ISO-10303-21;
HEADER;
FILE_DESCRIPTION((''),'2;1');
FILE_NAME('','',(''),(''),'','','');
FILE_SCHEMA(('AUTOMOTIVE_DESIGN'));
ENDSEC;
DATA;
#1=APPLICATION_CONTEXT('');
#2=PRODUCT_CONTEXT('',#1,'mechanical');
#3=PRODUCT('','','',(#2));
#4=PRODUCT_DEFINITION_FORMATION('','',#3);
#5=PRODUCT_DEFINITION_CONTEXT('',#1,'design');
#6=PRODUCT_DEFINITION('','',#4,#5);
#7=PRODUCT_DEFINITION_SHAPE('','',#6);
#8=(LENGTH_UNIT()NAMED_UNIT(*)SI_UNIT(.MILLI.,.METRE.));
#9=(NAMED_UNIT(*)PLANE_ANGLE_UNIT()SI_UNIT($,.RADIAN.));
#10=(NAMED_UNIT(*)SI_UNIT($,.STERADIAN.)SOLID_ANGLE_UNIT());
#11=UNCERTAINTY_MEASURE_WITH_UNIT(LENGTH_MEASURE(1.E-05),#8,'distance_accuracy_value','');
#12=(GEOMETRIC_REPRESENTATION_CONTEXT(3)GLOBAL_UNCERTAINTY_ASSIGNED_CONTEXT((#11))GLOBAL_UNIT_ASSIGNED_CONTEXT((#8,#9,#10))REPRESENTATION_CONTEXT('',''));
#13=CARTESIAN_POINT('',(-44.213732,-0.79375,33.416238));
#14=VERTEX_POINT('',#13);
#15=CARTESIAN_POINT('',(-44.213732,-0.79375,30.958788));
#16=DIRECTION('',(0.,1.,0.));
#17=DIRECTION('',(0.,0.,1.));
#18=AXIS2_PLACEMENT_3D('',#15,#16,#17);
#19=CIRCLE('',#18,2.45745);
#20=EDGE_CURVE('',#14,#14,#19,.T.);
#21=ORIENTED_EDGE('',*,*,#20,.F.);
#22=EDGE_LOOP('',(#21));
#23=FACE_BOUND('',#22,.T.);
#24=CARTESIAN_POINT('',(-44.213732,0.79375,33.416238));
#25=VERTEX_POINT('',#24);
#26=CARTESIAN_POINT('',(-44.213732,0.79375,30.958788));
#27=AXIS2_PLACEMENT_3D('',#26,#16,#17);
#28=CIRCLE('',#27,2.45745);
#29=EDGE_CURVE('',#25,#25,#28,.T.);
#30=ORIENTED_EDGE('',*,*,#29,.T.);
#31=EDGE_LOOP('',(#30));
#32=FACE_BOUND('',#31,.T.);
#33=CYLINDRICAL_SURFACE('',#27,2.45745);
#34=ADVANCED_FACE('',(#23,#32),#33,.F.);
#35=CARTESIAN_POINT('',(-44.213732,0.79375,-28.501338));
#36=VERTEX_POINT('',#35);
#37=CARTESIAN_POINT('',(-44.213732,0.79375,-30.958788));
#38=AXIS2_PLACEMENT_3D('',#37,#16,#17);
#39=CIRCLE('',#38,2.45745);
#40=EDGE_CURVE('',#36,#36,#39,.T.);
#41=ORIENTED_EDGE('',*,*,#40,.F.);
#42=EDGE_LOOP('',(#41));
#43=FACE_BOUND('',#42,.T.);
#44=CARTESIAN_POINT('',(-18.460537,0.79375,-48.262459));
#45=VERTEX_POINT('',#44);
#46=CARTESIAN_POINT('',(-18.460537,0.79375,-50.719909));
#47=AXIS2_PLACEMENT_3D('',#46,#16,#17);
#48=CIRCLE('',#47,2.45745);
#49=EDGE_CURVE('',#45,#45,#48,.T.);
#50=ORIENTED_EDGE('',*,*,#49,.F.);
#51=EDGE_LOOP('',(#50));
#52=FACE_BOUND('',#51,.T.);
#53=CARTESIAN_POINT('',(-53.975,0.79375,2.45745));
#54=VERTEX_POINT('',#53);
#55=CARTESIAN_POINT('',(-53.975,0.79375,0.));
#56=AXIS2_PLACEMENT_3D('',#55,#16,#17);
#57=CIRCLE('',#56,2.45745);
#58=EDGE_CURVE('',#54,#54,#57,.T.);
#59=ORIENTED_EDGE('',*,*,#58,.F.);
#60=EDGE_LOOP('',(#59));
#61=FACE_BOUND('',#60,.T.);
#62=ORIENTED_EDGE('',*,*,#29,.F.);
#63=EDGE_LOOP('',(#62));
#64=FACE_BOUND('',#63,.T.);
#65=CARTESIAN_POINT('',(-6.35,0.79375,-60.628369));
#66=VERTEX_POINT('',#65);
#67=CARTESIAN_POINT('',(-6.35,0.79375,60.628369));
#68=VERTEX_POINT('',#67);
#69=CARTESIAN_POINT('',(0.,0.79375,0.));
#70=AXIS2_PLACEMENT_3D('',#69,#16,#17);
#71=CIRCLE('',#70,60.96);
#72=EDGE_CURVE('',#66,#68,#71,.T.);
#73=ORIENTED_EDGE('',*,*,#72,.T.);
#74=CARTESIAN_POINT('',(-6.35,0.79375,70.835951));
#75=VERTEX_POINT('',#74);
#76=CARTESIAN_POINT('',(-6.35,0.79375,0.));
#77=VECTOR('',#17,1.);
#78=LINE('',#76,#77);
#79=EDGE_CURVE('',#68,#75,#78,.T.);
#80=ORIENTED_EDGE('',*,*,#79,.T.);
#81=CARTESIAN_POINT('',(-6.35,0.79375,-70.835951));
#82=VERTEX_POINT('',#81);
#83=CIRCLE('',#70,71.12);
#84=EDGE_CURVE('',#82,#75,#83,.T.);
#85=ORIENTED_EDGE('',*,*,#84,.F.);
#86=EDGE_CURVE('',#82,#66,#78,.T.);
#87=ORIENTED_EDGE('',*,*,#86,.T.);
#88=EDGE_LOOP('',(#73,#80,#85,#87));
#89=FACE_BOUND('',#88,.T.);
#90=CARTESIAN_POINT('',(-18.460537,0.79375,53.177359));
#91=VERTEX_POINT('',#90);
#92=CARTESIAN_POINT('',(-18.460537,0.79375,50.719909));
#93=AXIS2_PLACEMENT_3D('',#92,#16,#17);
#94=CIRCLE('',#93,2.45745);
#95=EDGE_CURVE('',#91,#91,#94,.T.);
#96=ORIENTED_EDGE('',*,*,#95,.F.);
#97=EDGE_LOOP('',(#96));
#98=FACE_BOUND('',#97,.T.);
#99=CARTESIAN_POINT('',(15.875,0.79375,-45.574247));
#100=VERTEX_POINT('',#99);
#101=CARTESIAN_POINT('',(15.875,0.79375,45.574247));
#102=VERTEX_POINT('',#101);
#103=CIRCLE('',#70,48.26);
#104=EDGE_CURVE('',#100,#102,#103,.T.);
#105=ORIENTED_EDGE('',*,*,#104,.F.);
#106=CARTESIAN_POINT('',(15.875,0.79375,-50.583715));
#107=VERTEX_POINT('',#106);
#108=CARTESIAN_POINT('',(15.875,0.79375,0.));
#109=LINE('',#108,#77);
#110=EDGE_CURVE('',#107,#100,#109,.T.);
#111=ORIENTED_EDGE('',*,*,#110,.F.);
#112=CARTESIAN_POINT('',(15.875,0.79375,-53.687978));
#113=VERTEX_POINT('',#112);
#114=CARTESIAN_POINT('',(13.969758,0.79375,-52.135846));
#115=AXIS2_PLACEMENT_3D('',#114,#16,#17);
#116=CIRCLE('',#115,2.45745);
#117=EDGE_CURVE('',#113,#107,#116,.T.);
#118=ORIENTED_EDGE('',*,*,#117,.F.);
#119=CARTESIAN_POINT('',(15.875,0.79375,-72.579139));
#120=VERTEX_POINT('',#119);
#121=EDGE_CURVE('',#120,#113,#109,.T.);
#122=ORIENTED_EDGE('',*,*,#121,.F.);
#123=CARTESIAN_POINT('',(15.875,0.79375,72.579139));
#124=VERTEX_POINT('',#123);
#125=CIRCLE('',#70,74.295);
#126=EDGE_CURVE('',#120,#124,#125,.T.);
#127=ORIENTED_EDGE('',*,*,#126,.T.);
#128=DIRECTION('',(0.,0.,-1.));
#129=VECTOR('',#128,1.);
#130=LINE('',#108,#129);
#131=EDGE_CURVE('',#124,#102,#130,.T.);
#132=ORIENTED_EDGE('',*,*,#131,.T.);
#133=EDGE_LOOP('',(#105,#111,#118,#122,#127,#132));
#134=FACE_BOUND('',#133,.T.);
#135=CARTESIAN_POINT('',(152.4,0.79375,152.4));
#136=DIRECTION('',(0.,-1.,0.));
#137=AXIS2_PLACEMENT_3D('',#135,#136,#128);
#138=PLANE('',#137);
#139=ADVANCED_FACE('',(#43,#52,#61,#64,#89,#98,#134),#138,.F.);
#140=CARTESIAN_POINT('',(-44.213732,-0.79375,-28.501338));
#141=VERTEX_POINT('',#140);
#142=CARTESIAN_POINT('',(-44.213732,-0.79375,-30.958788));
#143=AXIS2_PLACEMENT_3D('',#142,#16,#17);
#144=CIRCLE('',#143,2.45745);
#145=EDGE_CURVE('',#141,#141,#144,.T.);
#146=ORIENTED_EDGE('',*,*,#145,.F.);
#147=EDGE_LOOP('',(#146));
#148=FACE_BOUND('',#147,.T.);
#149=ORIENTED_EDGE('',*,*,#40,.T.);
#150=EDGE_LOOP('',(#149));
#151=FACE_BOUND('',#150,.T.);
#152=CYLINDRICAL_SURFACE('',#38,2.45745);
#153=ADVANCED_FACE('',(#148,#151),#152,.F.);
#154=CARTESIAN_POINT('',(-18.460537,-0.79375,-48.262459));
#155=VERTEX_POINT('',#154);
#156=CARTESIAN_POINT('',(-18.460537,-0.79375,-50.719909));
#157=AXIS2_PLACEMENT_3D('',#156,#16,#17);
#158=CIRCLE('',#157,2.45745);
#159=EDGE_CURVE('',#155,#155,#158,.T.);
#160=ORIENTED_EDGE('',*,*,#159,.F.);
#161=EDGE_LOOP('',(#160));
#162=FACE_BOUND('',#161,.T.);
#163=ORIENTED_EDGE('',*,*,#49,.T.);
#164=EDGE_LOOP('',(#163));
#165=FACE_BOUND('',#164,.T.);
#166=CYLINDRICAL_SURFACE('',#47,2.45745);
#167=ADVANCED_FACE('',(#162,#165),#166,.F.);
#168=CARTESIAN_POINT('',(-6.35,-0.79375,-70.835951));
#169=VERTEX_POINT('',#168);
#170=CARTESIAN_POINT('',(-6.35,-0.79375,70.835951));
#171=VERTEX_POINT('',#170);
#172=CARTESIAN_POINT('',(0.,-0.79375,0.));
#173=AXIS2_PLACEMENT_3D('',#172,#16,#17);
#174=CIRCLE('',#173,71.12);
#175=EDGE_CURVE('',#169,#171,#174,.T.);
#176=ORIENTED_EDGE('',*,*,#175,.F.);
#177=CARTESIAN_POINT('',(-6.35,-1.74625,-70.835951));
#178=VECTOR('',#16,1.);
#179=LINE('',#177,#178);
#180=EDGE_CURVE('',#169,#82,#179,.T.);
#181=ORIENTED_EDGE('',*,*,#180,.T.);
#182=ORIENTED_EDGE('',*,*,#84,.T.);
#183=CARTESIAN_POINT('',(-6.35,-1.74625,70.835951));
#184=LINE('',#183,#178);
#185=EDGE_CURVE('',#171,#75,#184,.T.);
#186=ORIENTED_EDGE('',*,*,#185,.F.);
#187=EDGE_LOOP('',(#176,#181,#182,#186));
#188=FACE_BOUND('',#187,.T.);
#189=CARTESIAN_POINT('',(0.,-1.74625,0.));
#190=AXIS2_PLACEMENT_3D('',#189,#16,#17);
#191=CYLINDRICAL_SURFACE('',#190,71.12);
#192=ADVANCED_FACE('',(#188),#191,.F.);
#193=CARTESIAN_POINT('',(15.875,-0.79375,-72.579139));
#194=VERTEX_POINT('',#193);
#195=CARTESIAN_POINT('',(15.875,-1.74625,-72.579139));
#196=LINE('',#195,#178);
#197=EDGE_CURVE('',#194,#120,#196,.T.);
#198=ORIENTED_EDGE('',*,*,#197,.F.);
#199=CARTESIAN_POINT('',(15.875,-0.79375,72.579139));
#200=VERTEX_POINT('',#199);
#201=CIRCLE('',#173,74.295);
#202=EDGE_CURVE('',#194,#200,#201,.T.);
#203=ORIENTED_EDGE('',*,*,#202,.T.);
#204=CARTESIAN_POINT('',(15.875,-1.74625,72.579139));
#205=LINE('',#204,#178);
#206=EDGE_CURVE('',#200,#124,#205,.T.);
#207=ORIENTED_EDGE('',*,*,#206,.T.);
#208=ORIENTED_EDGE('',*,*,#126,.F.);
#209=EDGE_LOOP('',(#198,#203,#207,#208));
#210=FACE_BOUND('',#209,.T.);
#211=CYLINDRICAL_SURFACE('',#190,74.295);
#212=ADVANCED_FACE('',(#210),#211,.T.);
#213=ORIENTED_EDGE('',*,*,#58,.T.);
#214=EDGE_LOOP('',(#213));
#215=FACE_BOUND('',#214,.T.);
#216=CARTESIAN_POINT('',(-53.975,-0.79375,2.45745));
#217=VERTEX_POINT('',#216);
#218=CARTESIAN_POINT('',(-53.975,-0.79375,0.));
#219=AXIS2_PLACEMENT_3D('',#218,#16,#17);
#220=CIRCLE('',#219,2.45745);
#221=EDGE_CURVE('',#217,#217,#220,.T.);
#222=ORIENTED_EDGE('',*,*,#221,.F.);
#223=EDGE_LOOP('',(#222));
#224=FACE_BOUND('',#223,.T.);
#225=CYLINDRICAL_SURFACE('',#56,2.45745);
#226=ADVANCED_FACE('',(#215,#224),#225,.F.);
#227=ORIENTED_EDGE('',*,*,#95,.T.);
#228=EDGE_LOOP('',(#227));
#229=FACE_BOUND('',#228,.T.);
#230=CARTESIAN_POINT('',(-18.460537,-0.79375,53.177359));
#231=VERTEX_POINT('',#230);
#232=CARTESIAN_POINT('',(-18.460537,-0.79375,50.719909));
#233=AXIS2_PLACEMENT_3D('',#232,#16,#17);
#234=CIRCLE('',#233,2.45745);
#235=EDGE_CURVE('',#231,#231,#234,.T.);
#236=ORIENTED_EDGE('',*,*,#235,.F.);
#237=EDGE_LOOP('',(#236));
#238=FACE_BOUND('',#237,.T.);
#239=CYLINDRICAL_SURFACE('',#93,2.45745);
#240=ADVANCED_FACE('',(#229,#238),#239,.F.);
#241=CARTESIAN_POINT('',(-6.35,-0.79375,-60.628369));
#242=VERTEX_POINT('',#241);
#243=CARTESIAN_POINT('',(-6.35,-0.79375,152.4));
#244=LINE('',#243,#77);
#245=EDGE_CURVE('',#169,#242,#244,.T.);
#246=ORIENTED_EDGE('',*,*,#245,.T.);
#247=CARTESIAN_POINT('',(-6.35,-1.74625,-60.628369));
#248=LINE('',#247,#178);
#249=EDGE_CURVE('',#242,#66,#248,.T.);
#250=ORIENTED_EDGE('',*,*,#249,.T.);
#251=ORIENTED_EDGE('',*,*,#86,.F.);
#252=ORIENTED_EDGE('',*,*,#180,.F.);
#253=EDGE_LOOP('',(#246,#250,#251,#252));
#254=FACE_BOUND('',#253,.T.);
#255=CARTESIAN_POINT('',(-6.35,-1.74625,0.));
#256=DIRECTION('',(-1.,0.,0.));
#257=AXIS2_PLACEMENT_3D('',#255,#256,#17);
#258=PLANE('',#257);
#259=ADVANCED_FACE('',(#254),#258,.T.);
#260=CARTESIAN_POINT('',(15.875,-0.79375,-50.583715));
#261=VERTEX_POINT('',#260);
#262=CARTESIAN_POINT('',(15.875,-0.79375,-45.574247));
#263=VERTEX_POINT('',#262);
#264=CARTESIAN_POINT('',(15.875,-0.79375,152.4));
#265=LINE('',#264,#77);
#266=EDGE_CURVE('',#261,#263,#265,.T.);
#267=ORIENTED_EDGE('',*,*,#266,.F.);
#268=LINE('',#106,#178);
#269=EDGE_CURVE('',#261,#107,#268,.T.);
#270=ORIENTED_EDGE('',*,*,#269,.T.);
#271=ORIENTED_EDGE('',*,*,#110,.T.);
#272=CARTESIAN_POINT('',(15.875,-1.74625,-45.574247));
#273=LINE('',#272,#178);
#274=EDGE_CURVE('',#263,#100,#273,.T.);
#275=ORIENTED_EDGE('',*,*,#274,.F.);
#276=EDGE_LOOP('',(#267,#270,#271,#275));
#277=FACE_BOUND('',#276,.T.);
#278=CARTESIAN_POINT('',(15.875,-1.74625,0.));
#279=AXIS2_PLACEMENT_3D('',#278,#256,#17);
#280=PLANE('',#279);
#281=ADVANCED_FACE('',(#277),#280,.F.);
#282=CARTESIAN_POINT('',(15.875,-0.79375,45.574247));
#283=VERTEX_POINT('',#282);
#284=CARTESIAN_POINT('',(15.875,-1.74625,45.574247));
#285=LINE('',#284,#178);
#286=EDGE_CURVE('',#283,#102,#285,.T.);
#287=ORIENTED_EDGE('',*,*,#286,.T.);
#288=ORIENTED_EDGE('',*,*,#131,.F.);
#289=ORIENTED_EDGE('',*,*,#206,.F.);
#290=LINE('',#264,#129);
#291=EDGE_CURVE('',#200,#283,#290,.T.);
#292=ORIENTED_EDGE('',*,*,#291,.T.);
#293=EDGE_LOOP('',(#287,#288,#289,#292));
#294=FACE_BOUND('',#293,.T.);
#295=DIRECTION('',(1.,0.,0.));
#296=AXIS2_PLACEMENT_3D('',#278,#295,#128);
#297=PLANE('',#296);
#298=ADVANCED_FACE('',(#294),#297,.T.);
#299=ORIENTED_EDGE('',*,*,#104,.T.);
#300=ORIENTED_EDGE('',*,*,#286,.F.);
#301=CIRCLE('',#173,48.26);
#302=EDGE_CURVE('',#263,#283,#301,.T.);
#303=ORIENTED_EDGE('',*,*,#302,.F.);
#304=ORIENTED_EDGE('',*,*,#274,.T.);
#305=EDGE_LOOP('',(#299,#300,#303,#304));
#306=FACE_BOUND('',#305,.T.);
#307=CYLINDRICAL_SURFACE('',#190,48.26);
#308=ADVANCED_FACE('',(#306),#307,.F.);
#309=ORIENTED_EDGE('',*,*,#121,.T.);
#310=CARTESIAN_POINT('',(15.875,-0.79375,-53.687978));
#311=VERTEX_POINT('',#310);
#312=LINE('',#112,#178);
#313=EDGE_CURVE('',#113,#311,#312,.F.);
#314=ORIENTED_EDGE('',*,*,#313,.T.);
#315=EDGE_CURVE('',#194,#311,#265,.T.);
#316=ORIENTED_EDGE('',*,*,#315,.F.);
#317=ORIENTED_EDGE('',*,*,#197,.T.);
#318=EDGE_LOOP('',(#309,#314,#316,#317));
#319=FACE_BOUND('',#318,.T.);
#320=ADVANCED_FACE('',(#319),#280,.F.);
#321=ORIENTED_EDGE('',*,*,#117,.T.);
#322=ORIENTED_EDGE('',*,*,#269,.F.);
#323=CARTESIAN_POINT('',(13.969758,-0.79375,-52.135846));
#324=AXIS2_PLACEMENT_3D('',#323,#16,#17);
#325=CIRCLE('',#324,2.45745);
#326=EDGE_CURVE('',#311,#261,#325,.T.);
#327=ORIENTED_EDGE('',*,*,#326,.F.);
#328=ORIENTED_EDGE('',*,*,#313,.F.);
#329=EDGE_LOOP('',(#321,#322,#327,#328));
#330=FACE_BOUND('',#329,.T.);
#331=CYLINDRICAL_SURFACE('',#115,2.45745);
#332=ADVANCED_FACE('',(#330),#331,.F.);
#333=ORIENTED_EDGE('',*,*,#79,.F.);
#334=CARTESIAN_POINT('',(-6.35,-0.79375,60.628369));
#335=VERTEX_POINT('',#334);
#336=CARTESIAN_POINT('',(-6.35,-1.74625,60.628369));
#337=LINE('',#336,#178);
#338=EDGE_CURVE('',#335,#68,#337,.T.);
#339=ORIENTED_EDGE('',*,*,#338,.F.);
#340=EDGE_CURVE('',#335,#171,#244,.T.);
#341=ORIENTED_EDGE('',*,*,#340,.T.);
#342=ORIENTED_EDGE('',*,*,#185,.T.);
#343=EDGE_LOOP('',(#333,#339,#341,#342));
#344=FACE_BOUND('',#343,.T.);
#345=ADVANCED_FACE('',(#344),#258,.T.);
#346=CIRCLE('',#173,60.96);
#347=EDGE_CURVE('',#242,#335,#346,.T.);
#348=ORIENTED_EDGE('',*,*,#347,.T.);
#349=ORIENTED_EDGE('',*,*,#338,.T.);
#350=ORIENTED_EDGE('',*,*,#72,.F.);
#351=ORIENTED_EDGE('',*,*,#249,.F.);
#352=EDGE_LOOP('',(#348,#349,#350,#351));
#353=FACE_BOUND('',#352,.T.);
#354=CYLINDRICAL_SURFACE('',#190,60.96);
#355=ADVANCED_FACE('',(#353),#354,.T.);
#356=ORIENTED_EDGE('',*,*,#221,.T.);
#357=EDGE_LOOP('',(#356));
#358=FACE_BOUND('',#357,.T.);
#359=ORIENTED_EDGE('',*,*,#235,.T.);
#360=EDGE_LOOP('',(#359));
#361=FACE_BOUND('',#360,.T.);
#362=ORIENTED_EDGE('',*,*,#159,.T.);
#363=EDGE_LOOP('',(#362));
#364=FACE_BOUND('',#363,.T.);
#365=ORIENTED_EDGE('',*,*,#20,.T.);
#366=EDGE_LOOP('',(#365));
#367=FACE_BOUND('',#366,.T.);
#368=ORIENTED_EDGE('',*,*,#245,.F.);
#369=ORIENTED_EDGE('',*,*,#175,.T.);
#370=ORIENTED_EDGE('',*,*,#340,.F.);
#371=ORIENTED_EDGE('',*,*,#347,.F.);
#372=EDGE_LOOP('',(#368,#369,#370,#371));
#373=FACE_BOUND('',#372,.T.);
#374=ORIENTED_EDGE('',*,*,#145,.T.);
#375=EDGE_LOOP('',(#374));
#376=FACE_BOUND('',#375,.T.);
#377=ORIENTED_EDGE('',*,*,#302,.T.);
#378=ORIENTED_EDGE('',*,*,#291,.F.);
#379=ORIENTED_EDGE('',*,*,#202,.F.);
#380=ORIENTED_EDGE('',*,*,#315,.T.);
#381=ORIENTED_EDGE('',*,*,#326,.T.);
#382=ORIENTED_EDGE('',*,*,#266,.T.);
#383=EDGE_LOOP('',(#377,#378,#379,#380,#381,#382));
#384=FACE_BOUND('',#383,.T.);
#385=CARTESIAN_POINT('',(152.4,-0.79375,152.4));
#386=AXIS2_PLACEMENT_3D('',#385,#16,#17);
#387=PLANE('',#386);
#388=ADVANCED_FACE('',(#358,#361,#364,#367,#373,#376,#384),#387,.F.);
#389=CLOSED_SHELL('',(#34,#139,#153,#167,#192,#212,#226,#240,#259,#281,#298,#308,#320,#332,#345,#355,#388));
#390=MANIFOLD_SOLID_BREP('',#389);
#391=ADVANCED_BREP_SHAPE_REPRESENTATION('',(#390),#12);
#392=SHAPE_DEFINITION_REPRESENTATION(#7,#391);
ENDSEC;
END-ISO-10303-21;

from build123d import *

# Parameters (mm, degrees)
BOSS_EXTRUDE1_DEPTH          = 152.4
BOSS_EXTRUDE1_DEPTH_BACK     = 152.4
SKETCH3_W                    = 304.8
SKETCH3_H                    = 1.5875
SKETCH4_W                    = 304.8
SKETCH4_H                    = 304.8
CUT_EXTRUDE1_DEPTH           = 2.54
F_10_0_1935_DIAMETER_HOLE1_D = 4.9149
CIRPATTERN1_START            = -0.79375
CIRPATTERN1_OUTLINE_R        = 2.45745
CIRPATTERN1_DEPTH            = 1.5875


# Read off the part's stored shape, not the designer's step: CirPattern1
with BuildPart() as part:
    # Sketch3 → Boss-Extrude1 (new, two sides: drawn at the far end of the back side and taken through both)
    with BuildSketch(Plane.XY.offset(-BOSS_EXTRUDE1_DEPTH_BACK)):
        Rectangle(SKETCH3_W, SKETCH3_H)
    extrude(amount=BOSS_EXTRUDE1_DEPTH + BOSS_EXTRUDE1_DEPTH_BACK)

    # Sketch4 → Cut-Extrude1 (cut)
    # profile 1 of 2: a face of its own
    with BuildSketch(Plane(origin=(0, 0.79375, 0), x_dir=(1, 0, 0), z_dir=(0, 1, 0))):
        Rectangle(SKETCH4_W, SKETCH4_H)
        with BuildLine():
            Line((15.875, -45.57424684), (15.875, -72.579138876))
            ThreePointArc((15.875, -72.579138876), (-74.295, 0), (15.875, 72.579138876))
            Line((15.875, 72.579138876), (15.875, 45.57424684))
            ThreePointArc((15.875, 45.57424684), (-48.26, 0), (15.875, -45.57424684))
        make_face(mode=Mode.SUBTRACT)
    # profile 2 of 2: a face of its own
    with BuildSketch(Plane(origin=(0, 0.79375, 0), x_dir=(1, 0, 0), z_dir=(0, 1, 0))):
        with BuildLine():
            Line((-6.35, 60.628368772), (-6.35, 70.835950618))
            ThreePointArc((-6.35, 70.835950618), (-71.12, 0), (-6.35, -70.835950618))
            Line((-6.35, -70.835950618), (-6.35, -60.628368772))
            ThreePointArc((-6.35, -60.628368772), (-60.96, 0), (-6.35, 60.628368772))
        make_face()
    extrude(amount=-CUT_EXTRUDE1_DEPTH, mode=Mode.SUBTRACT)

    # #10 (0.1935) Diameter Hole1 (through all)
    with Locations(Plane(origin=(-53.975, 0.79375, 0), x_dir=(0, 0, 1), z_dir=(0, 1, 0))):
        with Locations((0, 0)):
            Hole(F_10_0_1935_DIAMETER_HOLE1_D / 2)

    # CirPattern1 outline → CirPattern1 (cut)
    with BuildSketch(Plane(origin=(0, 0, 0), x_dir=(1, 0, 0), z_dir=(0, 1, 0)).offset(CIRPATTERN1_START)):
        with Locations((-44.21373159, 30.958788152)):
            Circle(CIRPATTERN1_OUTLINE_R)
        with Locations((-18.460537236, 50.719909207)):
            Circle(CIRPATTERN1_OUTLINE_R)
        with BuildLine():
            Line((15.875, 50.583714627), (15.875, 53.687978321))
            ThreePointArc((15.875, 53.687978321), (11.512307959, 52.135846474), (15.875, 50.583714627))
        make_face()
        with Locations((-44.21373159, -30.958788152)):
            Circle(CIRPATTERN1_OUTLINE_R)
        with Locations((-18.460537236, -50.719909207)):
            Circle(CIRPATTERN1_OUTLINE_R)
    extrude(amount=CIRPATTERN1_DEPTH, mode=Mode.SUBTRACT)


solid = part.part
